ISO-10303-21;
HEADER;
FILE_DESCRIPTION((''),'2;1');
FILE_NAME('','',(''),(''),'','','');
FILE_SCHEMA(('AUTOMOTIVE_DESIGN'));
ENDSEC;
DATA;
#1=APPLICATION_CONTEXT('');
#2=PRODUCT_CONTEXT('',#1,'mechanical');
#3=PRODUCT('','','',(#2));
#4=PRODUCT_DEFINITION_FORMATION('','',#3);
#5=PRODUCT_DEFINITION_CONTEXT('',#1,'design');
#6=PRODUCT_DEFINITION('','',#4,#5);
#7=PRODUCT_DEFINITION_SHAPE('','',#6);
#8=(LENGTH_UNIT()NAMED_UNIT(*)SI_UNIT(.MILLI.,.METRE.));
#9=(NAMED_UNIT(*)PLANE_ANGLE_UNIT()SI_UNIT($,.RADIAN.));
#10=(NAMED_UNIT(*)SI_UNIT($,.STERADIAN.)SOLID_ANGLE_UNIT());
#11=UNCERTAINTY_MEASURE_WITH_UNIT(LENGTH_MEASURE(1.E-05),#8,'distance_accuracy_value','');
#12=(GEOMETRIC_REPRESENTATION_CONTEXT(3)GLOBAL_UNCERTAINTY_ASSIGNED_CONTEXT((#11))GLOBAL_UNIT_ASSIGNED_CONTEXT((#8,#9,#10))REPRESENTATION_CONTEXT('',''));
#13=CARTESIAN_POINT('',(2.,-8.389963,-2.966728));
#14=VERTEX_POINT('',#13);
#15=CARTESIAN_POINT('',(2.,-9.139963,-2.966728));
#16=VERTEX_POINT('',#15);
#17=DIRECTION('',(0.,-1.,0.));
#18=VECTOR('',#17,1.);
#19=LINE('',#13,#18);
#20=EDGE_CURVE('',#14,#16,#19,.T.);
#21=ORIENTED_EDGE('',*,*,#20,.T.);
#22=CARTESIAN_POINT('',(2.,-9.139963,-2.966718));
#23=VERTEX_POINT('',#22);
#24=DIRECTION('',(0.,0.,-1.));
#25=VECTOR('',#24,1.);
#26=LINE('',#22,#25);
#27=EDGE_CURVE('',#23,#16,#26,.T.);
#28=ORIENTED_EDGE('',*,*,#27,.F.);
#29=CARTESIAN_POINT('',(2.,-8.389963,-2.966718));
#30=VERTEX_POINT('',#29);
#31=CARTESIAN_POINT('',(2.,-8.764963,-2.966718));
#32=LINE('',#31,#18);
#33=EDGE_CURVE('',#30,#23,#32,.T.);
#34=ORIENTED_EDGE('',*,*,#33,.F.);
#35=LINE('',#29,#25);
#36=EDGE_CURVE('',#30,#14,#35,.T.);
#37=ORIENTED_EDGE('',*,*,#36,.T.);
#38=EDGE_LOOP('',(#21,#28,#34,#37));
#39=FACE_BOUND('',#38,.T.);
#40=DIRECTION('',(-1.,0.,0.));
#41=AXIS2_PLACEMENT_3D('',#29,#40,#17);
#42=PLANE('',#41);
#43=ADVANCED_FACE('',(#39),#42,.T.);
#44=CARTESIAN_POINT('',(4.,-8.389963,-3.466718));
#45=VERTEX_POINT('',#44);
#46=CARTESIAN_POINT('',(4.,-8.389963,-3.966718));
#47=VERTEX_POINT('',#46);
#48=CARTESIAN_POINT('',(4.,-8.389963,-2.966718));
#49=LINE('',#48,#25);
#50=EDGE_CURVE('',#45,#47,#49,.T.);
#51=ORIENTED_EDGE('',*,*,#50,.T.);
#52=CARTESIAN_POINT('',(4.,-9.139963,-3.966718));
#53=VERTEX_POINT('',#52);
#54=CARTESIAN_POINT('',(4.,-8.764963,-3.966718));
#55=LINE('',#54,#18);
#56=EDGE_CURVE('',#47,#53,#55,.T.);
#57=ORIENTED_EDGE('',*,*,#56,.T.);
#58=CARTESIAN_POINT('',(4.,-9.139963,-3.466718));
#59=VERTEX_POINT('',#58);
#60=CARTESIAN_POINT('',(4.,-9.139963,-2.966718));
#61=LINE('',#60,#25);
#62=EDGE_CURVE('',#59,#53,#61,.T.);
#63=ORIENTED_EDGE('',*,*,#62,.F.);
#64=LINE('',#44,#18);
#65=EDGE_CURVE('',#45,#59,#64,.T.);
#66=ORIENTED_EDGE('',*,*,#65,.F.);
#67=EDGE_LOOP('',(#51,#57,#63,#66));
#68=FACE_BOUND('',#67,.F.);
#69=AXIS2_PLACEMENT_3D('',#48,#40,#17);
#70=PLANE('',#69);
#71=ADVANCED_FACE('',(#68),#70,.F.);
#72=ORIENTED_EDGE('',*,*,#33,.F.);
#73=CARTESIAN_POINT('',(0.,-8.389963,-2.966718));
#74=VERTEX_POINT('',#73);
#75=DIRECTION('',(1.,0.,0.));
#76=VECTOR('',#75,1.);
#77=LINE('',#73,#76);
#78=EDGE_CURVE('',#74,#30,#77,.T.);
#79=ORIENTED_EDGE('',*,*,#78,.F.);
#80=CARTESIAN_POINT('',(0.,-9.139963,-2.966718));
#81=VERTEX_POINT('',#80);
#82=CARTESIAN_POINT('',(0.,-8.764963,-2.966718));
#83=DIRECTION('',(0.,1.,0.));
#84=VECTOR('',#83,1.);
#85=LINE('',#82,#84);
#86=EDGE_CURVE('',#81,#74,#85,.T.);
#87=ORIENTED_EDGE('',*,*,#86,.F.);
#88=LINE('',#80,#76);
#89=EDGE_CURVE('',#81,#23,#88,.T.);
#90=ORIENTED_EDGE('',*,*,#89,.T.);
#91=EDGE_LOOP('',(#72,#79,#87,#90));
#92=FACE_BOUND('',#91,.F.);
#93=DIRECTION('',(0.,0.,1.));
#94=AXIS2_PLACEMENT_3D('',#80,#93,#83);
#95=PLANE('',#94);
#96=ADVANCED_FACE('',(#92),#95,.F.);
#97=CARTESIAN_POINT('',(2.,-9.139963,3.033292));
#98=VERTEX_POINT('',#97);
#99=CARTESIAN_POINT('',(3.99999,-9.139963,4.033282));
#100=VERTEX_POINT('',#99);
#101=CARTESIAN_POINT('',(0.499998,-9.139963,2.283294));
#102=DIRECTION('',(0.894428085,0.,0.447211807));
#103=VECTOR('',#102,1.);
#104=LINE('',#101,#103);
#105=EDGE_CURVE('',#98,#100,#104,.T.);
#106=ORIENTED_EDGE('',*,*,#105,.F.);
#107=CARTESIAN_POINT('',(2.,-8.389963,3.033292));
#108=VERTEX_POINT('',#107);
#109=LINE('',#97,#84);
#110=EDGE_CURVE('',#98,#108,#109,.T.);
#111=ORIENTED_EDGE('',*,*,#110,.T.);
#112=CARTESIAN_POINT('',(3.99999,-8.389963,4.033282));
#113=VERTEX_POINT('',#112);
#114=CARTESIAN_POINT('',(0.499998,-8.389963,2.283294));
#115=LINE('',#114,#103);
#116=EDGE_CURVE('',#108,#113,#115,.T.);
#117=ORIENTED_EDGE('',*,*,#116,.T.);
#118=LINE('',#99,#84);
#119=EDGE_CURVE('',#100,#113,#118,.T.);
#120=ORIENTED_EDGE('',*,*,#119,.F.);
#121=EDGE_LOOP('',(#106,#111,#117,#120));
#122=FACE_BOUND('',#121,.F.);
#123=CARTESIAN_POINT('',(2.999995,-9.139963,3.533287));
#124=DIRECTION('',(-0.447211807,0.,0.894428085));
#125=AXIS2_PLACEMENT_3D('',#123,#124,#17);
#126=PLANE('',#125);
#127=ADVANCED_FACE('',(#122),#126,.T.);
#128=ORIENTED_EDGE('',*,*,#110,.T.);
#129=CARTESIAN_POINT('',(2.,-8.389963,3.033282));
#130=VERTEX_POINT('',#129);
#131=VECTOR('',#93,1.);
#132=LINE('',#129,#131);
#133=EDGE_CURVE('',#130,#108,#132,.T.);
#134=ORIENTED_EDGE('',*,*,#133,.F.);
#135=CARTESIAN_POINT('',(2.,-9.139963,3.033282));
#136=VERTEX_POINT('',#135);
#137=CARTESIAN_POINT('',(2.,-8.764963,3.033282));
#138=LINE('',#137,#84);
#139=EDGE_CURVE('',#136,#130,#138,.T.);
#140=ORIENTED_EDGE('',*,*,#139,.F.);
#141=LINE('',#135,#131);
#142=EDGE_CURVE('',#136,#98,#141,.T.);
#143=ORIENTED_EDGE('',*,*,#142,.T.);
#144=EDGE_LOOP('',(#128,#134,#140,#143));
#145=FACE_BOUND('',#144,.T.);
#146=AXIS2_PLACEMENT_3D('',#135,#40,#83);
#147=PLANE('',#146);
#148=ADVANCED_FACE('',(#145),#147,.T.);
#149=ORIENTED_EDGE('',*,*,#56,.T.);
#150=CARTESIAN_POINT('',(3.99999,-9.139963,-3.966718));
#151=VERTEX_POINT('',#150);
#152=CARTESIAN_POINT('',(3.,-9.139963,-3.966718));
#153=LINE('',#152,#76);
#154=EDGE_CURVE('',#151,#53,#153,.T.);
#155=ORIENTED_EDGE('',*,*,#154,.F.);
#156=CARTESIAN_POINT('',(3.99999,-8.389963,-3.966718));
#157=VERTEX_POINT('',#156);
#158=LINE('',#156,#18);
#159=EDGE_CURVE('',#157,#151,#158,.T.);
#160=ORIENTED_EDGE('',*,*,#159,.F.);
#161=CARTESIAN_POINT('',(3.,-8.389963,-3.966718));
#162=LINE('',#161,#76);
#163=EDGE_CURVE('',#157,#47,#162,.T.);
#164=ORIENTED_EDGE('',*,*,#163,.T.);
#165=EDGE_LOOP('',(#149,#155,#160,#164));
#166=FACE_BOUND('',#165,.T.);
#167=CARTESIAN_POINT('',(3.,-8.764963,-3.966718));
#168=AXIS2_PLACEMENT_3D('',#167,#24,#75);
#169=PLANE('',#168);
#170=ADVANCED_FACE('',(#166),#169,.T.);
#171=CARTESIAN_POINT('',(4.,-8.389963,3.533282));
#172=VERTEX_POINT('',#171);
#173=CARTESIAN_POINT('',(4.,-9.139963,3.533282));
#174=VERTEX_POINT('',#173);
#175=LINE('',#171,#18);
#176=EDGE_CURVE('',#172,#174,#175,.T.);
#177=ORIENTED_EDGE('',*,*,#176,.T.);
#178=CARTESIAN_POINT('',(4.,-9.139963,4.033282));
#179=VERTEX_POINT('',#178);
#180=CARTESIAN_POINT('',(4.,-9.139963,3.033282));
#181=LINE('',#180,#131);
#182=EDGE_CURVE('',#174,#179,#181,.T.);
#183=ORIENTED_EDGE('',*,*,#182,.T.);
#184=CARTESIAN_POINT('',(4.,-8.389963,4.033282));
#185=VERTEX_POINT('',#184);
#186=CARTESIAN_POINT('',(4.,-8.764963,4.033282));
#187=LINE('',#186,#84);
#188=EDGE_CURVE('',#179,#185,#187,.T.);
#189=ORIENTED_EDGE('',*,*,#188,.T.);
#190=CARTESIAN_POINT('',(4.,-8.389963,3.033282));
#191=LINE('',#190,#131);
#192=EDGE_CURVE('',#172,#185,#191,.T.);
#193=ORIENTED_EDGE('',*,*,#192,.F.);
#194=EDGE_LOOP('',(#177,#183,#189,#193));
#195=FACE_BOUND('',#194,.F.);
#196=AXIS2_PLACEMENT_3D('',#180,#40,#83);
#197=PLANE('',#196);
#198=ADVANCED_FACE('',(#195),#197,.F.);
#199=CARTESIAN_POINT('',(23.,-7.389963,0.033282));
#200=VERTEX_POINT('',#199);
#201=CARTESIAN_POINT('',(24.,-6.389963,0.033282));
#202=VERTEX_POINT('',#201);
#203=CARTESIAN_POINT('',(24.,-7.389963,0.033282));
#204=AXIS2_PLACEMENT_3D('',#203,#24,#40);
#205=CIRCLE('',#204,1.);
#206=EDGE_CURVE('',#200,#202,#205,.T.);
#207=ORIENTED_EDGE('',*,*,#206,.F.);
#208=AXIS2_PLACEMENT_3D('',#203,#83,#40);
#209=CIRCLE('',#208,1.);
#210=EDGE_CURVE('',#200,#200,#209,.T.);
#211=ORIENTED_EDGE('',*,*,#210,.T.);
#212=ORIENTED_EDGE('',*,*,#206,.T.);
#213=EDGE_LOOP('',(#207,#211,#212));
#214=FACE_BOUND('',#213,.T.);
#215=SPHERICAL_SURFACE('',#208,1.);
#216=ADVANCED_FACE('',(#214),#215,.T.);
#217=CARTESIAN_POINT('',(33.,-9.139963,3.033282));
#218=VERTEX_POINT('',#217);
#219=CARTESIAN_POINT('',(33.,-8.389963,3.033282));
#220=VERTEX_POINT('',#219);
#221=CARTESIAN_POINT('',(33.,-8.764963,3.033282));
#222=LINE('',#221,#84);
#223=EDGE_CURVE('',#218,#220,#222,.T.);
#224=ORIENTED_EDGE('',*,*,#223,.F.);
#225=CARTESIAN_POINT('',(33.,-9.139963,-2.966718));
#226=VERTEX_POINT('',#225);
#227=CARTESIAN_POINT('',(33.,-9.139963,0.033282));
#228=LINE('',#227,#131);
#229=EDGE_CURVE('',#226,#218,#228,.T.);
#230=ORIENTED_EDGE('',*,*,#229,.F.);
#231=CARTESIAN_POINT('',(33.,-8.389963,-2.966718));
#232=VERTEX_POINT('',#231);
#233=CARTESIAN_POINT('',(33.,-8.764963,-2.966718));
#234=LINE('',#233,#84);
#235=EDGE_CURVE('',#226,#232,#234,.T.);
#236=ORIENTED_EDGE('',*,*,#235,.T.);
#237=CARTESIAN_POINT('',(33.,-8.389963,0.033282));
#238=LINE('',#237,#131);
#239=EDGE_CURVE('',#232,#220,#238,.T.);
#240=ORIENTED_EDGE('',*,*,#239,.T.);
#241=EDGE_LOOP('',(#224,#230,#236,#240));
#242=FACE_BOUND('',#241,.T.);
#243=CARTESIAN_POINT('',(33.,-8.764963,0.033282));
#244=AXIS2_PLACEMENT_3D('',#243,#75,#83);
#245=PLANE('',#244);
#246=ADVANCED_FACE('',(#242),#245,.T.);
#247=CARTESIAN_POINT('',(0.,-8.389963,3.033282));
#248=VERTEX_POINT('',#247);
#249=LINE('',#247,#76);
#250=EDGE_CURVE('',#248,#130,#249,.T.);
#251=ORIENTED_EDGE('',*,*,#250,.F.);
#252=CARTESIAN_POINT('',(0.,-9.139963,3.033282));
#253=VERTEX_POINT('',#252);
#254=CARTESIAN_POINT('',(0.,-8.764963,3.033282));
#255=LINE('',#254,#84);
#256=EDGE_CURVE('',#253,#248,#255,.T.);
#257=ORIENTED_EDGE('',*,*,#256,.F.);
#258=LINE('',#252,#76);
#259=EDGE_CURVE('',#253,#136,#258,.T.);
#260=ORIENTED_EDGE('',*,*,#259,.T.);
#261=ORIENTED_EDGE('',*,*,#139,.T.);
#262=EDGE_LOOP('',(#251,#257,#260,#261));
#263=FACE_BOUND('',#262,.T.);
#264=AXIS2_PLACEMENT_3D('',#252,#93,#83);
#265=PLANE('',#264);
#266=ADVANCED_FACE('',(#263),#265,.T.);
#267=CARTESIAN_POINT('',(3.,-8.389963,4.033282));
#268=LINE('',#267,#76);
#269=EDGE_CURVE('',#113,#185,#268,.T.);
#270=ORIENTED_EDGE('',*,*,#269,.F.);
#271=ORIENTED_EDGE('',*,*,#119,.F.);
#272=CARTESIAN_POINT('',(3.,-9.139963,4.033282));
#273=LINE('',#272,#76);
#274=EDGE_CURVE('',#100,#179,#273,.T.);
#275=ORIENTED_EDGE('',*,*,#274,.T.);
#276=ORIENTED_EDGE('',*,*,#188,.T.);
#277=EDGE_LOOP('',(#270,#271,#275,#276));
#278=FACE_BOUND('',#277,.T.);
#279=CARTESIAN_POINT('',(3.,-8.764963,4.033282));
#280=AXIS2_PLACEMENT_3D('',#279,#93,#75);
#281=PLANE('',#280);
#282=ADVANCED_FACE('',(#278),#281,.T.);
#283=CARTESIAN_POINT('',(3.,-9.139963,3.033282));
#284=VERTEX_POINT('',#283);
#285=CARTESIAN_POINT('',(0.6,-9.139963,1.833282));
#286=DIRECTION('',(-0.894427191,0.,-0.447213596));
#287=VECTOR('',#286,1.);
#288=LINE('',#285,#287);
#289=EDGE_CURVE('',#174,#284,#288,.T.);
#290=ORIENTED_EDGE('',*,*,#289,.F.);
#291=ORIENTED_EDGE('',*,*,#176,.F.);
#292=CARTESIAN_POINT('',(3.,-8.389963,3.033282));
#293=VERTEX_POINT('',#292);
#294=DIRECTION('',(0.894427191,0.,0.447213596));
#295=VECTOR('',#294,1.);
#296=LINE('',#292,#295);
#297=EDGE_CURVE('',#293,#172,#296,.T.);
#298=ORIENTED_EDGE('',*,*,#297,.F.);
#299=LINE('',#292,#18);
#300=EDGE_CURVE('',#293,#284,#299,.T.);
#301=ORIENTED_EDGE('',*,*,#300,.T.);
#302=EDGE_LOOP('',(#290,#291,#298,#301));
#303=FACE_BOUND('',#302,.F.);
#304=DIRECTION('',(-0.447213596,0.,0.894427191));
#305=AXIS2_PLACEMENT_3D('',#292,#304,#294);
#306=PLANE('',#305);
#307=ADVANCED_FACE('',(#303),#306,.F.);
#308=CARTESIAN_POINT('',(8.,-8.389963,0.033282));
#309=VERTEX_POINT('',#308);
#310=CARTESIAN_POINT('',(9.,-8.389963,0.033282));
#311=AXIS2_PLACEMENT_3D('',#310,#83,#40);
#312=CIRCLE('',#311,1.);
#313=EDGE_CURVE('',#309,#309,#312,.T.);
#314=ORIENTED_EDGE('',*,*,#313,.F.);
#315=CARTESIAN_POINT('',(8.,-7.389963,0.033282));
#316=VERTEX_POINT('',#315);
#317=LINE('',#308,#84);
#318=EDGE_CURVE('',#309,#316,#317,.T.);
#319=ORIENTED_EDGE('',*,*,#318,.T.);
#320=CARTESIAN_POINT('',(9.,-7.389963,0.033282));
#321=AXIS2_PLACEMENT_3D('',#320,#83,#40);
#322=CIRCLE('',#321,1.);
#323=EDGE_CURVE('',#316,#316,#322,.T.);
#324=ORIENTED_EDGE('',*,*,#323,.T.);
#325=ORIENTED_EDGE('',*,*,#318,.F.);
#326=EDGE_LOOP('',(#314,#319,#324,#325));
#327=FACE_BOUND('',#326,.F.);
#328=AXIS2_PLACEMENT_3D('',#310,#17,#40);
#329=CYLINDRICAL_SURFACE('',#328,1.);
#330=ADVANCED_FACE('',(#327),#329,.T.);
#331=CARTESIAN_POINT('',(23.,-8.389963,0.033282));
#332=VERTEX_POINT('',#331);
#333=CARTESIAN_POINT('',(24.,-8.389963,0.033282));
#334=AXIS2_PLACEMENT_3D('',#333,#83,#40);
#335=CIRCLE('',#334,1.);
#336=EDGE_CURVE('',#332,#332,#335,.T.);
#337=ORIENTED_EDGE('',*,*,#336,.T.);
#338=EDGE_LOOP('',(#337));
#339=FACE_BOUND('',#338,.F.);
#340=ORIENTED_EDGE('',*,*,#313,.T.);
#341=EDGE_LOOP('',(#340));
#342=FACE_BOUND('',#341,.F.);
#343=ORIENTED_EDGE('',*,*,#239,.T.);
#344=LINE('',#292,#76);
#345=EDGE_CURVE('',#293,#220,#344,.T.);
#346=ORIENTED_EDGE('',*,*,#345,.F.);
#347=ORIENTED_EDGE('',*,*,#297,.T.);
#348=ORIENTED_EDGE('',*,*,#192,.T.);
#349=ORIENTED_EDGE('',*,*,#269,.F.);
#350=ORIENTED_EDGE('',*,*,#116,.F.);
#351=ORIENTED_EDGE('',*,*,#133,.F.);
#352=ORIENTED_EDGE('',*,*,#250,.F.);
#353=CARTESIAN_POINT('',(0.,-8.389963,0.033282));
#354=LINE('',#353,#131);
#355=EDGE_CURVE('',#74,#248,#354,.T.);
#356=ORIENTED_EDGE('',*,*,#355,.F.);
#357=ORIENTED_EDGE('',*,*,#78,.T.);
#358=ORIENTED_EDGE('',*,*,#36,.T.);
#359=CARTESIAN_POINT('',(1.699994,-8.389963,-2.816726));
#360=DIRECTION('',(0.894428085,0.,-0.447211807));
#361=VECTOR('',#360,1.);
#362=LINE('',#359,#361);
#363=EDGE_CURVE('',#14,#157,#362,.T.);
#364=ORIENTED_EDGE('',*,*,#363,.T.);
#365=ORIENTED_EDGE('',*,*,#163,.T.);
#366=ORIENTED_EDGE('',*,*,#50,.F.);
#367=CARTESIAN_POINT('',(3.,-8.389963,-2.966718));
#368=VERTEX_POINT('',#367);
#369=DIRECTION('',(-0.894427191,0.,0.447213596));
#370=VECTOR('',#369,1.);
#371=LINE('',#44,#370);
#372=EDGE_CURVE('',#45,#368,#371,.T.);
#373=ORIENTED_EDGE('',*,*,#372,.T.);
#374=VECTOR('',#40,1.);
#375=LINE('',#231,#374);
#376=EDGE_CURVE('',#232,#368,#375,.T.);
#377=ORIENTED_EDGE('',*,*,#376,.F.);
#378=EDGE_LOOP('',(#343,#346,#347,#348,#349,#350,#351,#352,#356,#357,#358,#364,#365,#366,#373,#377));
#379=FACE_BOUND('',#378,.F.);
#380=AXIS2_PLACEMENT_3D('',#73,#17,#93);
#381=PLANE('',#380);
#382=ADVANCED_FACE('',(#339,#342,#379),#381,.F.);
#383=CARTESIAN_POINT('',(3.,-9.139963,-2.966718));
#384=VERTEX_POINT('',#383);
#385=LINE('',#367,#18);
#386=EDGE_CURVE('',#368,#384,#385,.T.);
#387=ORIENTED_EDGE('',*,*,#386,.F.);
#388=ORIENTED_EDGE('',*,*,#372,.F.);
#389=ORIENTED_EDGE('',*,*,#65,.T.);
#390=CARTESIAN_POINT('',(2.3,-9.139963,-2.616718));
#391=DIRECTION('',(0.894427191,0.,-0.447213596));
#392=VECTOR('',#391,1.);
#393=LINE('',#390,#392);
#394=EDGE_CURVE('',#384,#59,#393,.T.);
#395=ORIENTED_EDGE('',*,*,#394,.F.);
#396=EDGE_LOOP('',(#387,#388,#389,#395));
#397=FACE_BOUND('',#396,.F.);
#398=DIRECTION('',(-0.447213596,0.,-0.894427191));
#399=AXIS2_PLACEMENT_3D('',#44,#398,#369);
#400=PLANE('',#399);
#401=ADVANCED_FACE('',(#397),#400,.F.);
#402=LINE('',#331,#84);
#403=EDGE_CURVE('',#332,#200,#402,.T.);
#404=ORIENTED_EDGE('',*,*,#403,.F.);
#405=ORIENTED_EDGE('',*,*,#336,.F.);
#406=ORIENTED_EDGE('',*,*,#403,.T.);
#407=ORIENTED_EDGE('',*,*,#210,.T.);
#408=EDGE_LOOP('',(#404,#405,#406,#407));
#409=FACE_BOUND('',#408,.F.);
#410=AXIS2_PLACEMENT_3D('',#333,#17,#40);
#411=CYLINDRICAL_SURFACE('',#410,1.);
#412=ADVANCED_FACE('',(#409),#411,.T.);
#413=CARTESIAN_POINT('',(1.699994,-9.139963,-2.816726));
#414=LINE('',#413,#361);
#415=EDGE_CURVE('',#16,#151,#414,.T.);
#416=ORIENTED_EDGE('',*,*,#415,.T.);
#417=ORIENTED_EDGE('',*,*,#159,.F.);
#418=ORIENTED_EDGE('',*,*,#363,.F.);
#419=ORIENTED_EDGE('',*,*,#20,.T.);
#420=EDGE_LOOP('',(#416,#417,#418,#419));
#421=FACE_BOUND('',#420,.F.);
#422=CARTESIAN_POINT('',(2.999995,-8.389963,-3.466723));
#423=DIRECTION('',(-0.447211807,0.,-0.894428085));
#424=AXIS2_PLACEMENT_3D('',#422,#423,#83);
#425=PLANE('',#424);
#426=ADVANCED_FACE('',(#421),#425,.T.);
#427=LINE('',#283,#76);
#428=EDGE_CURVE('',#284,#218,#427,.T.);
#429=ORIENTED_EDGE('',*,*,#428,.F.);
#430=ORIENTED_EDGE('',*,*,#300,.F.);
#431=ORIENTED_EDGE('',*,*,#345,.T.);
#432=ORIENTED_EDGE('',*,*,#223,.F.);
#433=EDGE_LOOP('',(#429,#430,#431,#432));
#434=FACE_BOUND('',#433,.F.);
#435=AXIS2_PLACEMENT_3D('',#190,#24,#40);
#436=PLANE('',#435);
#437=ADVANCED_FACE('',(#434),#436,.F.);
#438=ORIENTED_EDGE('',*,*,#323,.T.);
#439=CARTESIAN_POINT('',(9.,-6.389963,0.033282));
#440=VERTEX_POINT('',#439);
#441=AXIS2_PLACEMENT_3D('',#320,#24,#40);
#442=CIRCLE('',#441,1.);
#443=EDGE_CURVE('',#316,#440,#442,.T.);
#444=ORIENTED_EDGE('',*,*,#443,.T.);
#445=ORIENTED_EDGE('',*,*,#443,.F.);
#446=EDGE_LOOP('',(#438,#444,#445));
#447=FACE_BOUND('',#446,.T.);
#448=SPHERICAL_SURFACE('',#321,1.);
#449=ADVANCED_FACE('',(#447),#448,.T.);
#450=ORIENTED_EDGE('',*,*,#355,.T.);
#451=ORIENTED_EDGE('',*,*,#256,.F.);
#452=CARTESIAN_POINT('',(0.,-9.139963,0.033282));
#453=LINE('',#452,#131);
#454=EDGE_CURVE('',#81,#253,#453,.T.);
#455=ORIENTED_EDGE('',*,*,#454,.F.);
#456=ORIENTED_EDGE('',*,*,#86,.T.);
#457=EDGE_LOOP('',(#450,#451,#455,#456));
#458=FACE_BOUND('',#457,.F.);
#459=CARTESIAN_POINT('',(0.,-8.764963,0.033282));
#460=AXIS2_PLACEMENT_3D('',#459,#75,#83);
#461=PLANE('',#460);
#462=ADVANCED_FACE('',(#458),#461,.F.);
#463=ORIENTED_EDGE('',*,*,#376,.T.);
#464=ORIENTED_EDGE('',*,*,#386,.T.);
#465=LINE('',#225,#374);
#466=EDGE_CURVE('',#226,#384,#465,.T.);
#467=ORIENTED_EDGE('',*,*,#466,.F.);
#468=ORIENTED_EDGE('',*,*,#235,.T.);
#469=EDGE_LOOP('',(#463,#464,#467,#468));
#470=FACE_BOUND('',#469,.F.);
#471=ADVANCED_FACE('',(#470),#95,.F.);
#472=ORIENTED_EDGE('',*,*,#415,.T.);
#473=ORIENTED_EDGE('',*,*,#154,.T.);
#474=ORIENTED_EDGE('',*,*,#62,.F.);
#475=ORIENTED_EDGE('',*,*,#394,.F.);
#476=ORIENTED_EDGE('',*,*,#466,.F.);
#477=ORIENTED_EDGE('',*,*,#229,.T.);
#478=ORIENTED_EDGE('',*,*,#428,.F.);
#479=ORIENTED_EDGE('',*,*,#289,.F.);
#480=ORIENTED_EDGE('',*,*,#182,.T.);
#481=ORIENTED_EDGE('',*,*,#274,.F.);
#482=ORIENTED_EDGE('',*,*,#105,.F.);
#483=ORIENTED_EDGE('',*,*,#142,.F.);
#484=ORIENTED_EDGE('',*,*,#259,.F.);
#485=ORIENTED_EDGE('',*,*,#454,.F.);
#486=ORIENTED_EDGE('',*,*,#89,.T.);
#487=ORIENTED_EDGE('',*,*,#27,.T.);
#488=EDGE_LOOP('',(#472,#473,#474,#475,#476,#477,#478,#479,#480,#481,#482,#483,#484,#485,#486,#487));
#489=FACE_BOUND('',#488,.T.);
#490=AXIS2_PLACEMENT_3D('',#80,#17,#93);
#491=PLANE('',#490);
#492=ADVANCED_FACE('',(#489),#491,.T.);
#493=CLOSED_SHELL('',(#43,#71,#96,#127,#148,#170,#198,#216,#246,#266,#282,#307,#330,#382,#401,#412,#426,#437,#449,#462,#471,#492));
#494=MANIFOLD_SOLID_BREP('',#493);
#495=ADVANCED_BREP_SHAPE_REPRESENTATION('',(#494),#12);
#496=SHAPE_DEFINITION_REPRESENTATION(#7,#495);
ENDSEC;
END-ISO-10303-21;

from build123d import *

# Parameters (mm, degrees)
F0_W      = 0.75
F0_H      = 6
F1_DEPTH  = 33
F2_R      = 1
F3_DEPTH  = 2
F4_R      = 1
F5_W      = 2
F5_H      = 0.75
F6_DEPTH  = 1
F7_SIZE2  = 1.99999
F7_SIZE   = 0.99999
F8_W      = 2
F8_H      = 0.75
F9_DEPTH  = 1
F10_SIZE2 = 1.99999
F10_SIZE  = 0.99999
F12_DEPTH = 25


# Not quite as in the source:
# - a fillet or chamfer is up to 0.001 mm smaller than in the source, because OpenCascade refuses the exact size


with BuildPart() as f1:
    # F0 (on Right) → F1 (new body)
    with BuildSketch(Plane.YZ):
        with Locations((-8.76496256, 0.0332817435)):
            Rectangle(F0_W, F0_H)
    extrude(amount=F1_DEPTH)

    # F2 (on face) → F3 (join)
    with BuildSketch(Plane(origin=(0, -8.38996256, 0), x_dir=(-1, 0, 0), z_dir=(0, 1, 0))):
        with Locations((-9, 0.0332817435)):
            Circle(F2_R)
        with Locations((-24, 0.0332817435)):
            Circle(F2_R)
    extrude(amount=F3_DEPTH)

    # F4
    f4_edges = [f1.edges().sort_by_distance(p)[0] for p in [
        (10, -6.389963, 0.033282),
        (25, -6.389963, 0.033282),
    ]]
    fillet(f4_edges, radius=F4_R)

    # F5 (on face) → F6 (join)
    with BuildSketch(Plane.XY.offset(3.0332817435)):
        with Locations((3, -8.76496256)):
            Rectangle(F5_W, F5_H)
    extrude(amount=F6_DEPTH)

    # F7 (size 1 and 2 in the source; OpenCascade refuses exactly that, so slightly less here)
    f7_edges = [f1.edges().sort_by_distance(p)[0] for p in [
        (2, -8.764963, 4.033282),
    ]]
    f7_side = f1.faces().sort_by_distance((2, -8.764963, 3.533282))[0]
    chamfer(f7_edges, length=F7_SIZE, length2=F7_SIZE2, reference=f7_side)

    # F8 (on face) → F9 (join)
    with BuildSketch(Plane(origin=(0, 0, -2.9667182565), x_dir=(1, 0, 0), z_dir=(0, 0, -1))):
        with Locations((3, 8.76496256)):
            Rectangle(F8_W, F8_H)
    extrude(amount=F9_DEPTH)

    # F10 (size 1 and 2 in the source; OpenCascade refuses exactly that, so slightly less here)
    f10_edges = [f1.edges().sort_by_distance(p)[0] for p in [
        (2, -8.764963, -3.966718),
    ]]
    f10_side = f1.faces().sort_by_distance((2, -8.764963, -3.466718))[0]
    chamfer(f10_edges, length=F10_SIZE, length2=F10_SIZE2, reference=f10_side)

    # F11 (on face) → F12 (cut)
    with BuildSketch(Plane(origin=(0, -8.38996256, 0), x_dir=(-1, 0, 0), z_dir=(0, 1, 0))):
        Polygon((-3, 3.0332817435), (-4, 3.5332817435), (-4, 3.0332817435), align=None)
        Polygon((-3, -2.9667182565), (-4, -2.9667182565), (-4, -3.4667182565), align=None)
    extrude(amount=-F12_DEPTH, mode=Mode.SUBTRACT)


solid = f1.part
